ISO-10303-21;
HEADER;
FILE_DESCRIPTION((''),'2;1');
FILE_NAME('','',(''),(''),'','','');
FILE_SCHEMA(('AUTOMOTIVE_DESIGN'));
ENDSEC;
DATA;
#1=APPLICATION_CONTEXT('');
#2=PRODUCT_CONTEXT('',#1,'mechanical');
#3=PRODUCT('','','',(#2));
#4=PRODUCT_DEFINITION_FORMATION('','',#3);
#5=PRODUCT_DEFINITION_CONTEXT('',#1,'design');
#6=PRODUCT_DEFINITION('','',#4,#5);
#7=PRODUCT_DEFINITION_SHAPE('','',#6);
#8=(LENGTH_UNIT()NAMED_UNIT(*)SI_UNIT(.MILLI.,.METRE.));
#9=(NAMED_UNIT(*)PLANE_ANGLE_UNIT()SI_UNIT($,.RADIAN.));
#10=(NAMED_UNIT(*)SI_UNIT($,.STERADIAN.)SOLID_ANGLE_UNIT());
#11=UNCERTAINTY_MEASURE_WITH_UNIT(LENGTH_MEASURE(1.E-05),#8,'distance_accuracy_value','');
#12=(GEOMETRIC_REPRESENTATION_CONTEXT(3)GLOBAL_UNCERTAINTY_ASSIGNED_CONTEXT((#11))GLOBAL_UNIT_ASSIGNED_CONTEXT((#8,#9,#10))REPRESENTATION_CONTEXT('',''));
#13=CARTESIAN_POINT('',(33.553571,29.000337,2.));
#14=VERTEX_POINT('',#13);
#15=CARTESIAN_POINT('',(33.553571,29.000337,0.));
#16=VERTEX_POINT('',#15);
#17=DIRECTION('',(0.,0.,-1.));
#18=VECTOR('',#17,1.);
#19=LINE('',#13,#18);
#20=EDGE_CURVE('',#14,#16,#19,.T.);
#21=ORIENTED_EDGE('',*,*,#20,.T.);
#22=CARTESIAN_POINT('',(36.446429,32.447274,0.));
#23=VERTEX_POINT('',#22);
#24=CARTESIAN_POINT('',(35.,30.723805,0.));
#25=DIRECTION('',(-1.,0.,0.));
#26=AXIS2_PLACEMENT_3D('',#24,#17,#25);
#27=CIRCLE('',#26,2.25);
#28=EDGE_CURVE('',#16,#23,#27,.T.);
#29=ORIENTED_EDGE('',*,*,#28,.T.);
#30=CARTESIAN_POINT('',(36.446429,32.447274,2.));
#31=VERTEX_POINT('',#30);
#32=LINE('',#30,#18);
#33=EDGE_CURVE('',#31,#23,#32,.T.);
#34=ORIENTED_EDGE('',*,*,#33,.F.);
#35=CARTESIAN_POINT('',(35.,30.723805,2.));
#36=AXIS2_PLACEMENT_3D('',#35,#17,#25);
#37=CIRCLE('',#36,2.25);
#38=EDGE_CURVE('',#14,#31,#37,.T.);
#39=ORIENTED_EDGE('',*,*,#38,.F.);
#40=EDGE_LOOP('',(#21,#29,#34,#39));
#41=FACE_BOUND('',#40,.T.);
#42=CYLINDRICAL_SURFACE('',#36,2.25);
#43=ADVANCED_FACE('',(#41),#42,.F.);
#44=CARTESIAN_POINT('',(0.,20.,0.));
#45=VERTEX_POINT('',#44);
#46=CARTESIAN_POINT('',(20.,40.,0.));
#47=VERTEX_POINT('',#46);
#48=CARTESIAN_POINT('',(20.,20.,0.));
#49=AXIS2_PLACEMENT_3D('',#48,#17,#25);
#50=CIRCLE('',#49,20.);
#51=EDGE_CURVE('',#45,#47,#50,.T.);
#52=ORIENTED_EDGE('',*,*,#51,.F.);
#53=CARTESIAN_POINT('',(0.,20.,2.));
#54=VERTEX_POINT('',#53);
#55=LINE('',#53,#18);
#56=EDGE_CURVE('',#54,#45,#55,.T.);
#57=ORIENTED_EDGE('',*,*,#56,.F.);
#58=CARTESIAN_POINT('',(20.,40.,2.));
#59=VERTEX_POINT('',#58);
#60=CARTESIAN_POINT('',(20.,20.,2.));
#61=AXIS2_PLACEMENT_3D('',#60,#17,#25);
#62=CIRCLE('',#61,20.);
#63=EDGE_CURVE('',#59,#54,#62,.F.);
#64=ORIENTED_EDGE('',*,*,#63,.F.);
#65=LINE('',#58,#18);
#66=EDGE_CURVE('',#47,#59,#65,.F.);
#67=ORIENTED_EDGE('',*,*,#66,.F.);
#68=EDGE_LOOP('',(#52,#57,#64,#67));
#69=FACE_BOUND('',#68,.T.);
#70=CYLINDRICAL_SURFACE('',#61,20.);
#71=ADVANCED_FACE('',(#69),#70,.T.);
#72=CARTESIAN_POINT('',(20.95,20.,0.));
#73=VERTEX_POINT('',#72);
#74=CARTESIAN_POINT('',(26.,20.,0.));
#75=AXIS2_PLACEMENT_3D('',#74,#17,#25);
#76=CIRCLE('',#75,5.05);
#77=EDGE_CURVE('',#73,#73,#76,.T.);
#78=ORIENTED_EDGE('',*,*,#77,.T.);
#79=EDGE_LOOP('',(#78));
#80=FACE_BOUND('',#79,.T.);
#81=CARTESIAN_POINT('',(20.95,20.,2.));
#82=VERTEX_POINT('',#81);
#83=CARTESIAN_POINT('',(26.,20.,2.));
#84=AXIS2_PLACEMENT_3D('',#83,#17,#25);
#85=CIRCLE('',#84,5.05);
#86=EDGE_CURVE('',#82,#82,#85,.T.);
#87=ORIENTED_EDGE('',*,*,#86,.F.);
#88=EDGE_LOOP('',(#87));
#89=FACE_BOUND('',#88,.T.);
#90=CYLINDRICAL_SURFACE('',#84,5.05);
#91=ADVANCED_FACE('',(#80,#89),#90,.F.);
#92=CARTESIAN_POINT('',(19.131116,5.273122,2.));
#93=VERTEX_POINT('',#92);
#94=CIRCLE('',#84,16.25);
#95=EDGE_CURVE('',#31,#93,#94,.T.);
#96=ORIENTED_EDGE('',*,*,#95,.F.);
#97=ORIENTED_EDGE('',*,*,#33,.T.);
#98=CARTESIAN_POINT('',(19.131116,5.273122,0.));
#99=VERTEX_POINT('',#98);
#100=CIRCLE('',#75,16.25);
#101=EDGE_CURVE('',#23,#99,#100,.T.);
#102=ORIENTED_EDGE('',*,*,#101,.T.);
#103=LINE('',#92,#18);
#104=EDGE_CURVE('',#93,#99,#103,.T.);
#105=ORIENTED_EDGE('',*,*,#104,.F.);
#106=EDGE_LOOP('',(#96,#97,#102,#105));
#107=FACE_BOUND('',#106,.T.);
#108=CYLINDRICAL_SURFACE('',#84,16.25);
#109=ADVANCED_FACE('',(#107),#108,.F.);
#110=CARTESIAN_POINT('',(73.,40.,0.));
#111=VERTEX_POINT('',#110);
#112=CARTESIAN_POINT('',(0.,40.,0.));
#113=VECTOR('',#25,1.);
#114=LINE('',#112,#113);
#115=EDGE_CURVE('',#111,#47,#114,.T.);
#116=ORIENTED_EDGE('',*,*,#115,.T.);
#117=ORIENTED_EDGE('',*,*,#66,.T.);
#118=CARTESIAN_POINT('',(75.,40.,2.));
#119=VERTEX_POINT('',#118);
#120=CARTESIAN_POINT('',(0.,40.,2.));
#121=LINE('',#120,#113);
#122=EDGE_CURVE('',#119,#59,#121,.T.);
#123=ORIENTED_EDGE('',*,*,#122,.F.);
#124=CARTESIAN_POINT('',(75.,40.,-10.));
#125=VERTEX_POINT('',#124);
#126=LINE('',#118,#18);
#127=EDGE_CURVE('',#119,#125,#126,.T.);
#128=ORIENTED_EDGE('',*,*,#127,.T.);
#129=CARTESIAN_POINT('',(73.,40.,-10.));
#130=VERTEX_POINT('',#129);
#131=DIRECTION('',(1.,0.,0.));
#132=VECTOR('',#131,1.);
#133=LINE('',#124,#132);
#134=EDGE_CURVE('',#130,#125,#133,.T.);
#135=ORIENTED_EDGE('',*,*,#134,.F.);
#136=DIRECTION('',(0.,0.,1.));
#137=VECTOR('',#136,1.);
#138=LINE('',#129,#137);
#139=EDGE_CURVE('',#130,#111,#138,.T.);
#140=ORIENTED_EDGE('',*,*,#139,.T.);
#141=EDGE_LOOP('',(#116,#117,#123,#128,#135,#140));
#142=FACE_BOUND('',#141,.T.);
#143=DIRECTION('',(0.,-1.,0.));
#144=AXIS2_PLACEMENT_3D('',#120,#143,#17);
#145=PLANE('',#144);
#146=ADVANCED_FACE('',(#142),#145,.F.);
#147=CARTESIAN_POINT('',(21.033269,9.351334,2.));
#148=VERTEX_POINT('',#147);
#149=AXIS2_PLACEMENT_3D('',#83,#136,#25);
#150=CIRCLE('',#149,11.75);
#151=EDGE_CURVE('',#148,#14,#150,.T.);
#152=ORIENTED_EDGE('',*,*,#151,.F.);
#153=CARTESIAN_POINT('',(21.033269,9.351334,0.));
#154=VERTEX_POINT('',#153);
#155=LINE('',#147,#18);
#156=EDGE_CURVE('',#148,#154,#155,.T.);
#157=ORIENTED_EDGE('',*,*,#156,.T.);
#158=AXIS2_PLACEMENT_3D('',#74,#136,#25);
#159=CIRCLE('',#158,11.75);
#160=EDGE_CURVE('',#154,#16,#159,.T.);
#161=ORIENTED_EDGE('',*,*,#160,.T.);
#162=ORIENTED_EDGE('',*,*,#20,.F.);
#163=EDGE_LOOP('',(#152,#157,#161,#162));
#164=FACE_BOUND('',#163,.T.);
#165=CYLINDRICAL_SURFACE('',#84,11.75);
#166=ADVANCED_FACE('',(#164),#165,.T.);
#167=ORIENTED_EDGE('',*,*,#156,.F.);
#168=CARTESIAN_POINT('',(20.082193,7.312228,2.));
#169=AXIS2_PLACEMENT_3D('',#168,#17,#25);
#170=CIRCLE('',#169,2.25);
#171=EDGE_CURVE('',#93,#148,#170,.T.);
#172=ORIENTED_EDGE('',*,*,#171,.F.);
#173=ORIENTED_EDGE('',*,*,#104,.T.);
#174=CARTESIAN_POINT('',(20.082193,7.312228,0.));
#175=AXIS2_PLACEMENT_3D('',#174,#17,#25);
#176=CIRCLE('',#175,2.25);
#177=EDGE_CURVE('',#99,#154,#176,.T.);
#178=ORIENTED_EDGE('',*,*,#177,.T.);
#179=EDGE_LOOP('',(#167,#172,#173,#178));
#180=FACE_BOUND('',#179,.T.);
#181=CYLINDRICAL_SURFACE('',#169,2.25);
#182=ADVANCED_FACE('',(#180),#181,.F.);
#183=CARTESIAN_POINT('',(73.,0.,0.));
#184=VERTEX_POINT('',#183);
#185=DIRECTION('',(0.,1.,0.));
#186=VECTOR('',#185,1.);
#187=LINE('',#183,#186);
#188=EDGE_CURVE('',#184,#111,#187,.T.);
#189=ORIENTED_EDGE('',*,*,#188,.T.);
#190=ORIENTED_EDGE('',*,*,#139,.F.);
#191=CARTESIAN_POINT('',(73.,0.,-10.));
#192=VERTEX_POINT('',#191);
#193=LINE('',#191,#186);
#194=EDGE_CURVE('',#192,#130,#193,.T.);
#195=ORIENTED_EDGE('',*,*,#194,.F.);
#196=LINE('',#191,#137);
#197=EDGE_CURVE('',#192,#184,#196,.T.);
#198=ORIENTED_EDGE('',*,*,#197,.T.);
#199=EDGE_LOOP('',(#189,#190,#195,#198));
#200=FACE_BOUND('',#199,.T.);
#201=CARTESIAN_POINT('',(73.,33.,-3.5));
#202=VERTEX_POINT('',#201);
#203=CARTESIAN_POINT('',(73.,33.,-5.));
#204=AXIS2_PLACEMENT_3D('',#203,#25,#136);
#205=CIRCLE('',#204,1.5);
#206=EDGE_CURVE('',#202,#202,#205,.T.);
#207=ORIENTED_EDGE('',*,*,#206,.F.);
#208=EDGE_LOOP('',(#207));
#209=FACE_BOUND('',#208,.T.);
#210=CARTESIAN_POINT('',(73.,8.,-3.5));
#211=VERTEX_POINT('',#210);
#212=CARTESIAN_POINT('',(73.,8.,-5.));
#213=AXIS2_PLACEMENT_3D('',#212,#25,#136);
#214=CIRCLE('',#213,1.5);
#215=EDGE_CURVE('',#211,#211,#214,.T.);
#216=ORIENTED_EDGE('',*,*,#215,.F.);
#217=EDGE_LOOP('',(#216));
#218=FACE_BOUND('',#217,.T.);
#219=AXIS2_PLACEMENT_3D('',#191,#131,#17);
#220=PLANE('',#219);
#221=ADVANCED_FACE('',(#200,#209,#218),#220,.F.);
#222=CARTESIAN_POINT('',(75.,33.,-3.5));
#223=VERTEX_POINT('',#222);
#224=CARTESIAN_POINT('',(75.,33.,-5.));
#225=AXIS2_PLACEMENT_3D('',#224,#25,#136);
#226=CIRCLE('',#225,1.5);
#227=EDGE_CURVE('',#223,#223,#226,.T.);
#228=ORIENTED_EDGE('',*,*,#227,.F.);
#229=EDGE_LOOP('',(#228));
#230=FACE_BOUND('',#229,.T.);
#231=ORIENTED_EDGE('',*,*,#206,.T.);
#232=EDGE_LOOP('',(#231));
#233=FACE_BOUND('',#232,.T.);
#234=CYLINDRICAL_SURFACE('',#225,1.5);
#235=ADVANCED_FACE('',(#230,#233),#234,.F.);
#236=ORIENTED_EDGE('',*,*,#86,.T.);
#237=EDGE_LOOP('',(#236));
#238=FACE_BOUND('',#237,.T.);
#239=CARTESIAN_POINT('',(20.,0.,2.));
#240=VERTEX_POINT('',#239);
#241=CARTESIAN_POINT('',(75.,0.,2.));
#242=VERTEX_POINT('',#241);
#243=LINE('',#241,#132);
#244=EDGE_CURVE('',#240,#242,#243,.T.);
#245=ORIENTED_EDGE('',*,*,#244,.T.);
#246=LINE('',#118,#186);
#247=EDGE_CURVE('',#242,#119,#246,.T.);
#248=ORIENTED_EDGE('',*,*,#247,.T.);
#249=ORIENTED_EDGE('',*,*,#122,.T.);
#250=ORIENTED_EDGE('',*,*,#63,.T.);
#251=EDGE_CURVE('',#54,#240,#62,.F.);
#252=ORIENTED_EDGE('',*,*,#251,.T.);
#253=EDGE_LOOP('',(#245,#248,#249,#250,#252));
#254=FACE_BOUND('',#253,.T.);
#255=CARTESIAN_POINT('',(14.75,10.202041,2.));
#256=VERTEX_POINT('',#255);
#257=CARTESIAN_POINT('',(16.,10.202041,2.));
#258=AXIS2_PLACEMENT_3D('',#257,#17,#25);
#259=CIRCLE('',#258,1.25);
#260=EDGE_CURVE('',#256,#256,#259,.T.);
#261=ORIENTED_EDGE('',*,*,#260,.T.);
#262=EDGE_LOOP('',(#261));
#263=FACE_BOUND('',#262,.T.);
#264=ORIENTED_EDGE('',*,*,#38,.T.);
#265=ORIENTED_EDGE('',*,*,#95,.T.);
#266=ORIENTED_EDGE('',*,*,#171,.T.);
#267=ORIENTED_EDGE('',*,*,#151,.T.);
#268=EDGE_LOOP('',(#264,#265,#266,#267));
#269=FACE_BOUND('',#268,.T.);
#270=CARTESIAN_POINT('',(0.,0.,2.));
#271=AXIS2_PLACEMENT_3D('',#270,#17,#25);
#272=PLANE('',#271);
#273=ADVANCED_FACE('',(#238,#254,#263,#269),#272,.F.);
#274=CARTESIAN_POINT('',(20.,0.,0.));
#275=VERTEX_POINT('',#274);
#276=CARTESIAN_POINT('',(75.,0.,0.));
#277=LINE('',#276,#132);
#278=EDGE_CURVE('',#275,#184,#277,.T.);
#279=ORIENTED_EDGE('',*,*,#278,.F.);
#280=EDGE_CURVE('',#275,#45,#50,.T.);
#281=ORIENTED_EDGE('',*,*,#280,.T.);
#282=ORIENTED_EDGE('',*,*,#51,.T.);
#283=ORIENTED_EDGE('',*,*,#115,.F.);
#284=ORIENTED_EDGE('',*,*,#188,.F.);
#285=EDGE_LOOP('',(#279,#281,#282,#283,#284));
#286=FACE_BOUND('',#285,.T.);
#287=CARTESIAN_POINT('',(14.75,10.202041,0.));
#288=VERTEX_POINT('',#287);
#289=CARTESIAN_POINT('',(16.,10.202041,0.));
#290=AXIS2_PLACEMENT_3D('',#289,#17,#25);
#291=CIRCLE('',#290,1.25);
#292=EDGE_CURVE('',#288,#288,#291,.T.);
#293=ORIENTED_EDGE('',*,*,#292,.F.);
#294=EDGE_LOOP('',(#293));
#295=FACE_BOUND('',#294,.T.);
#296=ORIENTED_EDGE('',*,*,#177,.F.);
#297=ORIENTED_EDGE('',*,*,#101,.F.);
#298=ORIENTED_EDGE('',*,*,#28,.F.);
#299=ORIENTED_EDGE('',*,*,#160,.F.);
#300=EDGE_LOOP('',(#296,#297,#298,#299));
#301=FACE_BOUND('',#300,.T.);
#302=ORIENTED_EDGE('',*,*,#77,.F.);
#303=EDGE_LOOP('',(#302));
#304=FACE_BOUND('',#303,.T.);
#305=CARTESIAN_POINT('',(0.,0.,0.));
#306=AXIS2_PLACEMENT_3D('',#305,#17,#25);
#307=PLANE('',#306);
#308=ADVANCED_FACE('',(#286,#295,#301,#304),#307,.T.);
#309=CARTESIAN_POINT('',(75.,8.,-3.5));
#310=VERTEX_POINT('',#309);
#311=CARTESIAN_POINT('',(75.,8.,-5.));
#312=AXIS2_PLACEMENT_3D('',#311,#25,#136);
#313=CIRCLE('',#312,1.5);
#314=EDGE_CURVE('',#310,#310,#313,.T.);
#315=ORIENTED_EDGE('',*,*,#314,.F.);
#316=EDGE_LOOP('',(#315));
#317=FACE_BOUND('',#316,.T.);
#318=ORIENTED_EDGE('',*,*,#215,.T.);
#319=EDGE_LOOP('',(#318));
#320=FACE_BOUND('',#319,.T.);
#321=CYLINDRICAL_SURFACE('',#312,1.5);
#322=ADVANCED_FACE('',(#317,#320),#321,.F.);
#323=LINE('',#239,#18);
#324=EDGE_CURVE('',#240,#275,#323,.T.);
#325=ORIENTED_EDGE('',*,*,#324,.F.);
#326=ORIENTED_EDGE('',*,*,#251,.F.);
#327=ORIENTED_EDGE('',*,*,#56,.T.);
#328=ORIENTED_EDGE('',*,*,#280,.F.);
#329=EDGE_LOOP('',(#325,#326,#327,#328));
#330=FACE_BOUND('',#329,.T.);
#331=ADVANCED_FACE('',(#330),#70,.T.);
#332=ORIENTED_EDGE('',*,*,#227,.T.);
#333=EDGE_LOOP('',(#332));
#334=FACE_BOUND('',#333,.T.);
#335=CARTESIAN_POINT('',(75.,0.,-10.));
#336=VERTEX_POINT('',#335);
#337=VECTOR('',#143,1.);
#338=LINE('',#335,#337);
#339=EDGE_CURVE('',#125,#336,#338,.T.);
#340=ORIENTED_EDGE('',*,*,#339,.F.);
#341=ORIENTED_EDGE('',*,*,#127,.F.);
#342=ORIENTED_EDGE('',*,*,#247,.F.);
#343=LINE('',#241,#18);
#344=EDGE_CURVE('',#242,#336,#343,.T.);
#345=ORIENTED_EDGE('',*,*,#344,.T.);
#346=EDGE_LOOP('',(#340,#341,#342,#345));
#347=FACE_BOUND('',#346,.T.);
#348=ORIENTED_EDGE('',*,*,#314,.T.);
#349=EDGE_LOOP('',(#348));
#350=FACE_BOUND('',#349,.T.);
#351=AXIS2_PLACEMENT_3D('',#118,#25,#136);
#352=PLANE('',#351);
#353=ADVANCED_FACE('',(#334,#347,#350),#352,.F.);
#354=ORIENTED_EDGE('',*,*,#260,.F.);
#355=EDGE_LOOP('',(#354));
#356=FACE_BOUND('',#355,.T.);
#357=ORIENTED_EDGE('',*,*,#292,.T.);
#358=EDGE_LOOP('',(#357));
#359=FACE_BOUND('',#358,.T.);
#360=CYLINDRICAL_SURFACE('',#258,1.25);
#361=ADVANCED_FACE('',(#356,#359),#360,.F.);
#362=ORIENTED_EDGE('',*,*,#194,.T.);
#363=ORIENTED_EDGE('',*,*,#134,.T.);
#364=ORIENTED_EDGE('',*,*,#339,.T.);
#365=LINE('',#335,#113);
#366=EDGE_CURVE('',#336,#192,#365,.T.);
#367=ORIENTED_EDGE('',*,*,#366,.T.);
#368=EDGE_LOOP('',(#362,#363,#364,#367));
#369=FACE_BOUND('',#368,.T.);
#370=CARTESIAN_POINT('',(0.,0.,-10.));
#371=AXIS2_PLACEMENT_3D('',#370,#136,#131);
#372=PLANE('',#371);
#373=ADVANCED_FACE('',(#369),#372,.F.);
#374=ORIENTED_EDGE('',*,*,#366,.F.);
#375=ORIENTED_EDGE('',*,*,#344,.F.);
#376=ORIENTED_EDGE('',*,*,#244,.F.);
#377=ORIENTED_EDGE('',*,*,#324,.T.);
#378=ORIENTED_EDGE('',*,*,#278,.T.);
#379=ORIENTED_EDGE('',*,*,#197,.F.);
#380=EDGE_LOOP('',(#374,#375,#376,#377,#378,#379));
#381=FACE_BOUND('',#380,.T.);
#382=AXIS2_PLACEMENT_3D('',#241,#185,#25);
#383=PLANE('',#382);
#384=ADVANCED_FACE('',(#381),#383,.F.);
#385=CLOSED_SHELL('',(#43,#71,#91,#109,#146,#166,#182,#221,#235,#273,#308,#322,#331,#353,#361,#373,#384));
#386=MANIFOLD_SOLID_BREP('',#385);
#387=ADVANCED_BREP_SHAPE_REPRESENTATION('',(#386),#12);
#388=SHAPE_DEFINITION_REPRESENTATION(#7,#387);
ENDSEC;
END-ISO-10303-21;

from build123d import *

# Parameters (mm, degrees)
SKETCH_2_W          = 75
SKETCH_2_H          = 40
EXTRUDE_1_DEPTH     = 2
SKETCH_3_R          = 5.05
SKETCH_3_R_2        = 1.25
CUT_EXTRUDE_1_DEPTH = 86.023526156
FILLET_1_R          = 20
SKETCH_7_W          = 2
SKETCH_7_H          = 40
EXTRUDE_3_DEPTH     = 10
SKETCH_10_R         = 1.5
CUT_EXTRUDE_4_DEPTH = 84.839131675


with BuildPart() as part:
    # 草图2 → 凸台-拉伸1 (new body)
    with BuildSketch(Plane.XY):
        with Locations((37.5, 20)):
            Rectangle(SKETCH_2_W, SKETCH_2_H)
    extrude(amount=EXTRUDE_1_DEPTH)

    # 草图3 → 切除-拉伸1 (cut, through all)
    with BuildSketch(Plane(origin=(0, 0, 0), x_dir=(-1, 0, 0), z_dir=(0, 0, -1))):
        with Locations((-26, 20)):
            Circle(SKETCH_3_R)
        with Locations((-16, 10.202041029)):
            Circle(SKETCH_3_R_2)
        with BuildLine():
            ThreePointArc((-36.446428571, 32.447274003), (-39.704318392, 11.267637352), (-19.131116422, 5.273121906))
            ThreePointArc((-19.131116422, 5.273121906), (-18.043086412, 8.263304292), (-21.033268797, 9.351334301))
            ThreePointArc((-21.033268797, 9.351334301), (-35.909276376, 13.685830085), (-33.553571429, 29.000336587))
            ThreePointArc((-33.553571429, 29.000336587), (-33.276531292, 32.170233866), (-36.446428571, 32.447274003))
        make_face()
    extrude(amount=-CUT_EXTRUDE_1_DEPTH, mode=Mode.SUBTRACT)

    # 圆角1
    fillet_1_edges = [part.edges().sort_by_distance(p)[0] for p in [
        (0, 40, 1),
        (0, 0, 1),
    ]]
    fillet(fillet_1_edges, radius=FILLET_1_R - 0.0001)  # a hair under: the kernel refuses the full size

    # 草图7 → 凸台-拉伸3 (add)
    with BuildSketch(Plane(origin=(0, 0, 0), x_dir=(-1, 0, 0), z_dir=(0, 0, -1))):
        with Locations((-74, 20)):
            Rectangle(SKETCH_7_W, SKETCH_7_H)
    extrude(amount=EXTRUDE_3_DEPTH)

    # 草图10 → 切除-拉伸4 (cut, through all)
    with BuildSketch(Plane.ZY.offset(-73)):
        with Locations((-5, 33)):
            Circle(SKETCH_10_R)
        with Locations((-5, 8)):
            Circle(SKETCH_10_R)
    extrude(amount=-CUT_EXTRUDE_4_DEPTH, mode=Mode.SUBTRACT)


solid = part.part
